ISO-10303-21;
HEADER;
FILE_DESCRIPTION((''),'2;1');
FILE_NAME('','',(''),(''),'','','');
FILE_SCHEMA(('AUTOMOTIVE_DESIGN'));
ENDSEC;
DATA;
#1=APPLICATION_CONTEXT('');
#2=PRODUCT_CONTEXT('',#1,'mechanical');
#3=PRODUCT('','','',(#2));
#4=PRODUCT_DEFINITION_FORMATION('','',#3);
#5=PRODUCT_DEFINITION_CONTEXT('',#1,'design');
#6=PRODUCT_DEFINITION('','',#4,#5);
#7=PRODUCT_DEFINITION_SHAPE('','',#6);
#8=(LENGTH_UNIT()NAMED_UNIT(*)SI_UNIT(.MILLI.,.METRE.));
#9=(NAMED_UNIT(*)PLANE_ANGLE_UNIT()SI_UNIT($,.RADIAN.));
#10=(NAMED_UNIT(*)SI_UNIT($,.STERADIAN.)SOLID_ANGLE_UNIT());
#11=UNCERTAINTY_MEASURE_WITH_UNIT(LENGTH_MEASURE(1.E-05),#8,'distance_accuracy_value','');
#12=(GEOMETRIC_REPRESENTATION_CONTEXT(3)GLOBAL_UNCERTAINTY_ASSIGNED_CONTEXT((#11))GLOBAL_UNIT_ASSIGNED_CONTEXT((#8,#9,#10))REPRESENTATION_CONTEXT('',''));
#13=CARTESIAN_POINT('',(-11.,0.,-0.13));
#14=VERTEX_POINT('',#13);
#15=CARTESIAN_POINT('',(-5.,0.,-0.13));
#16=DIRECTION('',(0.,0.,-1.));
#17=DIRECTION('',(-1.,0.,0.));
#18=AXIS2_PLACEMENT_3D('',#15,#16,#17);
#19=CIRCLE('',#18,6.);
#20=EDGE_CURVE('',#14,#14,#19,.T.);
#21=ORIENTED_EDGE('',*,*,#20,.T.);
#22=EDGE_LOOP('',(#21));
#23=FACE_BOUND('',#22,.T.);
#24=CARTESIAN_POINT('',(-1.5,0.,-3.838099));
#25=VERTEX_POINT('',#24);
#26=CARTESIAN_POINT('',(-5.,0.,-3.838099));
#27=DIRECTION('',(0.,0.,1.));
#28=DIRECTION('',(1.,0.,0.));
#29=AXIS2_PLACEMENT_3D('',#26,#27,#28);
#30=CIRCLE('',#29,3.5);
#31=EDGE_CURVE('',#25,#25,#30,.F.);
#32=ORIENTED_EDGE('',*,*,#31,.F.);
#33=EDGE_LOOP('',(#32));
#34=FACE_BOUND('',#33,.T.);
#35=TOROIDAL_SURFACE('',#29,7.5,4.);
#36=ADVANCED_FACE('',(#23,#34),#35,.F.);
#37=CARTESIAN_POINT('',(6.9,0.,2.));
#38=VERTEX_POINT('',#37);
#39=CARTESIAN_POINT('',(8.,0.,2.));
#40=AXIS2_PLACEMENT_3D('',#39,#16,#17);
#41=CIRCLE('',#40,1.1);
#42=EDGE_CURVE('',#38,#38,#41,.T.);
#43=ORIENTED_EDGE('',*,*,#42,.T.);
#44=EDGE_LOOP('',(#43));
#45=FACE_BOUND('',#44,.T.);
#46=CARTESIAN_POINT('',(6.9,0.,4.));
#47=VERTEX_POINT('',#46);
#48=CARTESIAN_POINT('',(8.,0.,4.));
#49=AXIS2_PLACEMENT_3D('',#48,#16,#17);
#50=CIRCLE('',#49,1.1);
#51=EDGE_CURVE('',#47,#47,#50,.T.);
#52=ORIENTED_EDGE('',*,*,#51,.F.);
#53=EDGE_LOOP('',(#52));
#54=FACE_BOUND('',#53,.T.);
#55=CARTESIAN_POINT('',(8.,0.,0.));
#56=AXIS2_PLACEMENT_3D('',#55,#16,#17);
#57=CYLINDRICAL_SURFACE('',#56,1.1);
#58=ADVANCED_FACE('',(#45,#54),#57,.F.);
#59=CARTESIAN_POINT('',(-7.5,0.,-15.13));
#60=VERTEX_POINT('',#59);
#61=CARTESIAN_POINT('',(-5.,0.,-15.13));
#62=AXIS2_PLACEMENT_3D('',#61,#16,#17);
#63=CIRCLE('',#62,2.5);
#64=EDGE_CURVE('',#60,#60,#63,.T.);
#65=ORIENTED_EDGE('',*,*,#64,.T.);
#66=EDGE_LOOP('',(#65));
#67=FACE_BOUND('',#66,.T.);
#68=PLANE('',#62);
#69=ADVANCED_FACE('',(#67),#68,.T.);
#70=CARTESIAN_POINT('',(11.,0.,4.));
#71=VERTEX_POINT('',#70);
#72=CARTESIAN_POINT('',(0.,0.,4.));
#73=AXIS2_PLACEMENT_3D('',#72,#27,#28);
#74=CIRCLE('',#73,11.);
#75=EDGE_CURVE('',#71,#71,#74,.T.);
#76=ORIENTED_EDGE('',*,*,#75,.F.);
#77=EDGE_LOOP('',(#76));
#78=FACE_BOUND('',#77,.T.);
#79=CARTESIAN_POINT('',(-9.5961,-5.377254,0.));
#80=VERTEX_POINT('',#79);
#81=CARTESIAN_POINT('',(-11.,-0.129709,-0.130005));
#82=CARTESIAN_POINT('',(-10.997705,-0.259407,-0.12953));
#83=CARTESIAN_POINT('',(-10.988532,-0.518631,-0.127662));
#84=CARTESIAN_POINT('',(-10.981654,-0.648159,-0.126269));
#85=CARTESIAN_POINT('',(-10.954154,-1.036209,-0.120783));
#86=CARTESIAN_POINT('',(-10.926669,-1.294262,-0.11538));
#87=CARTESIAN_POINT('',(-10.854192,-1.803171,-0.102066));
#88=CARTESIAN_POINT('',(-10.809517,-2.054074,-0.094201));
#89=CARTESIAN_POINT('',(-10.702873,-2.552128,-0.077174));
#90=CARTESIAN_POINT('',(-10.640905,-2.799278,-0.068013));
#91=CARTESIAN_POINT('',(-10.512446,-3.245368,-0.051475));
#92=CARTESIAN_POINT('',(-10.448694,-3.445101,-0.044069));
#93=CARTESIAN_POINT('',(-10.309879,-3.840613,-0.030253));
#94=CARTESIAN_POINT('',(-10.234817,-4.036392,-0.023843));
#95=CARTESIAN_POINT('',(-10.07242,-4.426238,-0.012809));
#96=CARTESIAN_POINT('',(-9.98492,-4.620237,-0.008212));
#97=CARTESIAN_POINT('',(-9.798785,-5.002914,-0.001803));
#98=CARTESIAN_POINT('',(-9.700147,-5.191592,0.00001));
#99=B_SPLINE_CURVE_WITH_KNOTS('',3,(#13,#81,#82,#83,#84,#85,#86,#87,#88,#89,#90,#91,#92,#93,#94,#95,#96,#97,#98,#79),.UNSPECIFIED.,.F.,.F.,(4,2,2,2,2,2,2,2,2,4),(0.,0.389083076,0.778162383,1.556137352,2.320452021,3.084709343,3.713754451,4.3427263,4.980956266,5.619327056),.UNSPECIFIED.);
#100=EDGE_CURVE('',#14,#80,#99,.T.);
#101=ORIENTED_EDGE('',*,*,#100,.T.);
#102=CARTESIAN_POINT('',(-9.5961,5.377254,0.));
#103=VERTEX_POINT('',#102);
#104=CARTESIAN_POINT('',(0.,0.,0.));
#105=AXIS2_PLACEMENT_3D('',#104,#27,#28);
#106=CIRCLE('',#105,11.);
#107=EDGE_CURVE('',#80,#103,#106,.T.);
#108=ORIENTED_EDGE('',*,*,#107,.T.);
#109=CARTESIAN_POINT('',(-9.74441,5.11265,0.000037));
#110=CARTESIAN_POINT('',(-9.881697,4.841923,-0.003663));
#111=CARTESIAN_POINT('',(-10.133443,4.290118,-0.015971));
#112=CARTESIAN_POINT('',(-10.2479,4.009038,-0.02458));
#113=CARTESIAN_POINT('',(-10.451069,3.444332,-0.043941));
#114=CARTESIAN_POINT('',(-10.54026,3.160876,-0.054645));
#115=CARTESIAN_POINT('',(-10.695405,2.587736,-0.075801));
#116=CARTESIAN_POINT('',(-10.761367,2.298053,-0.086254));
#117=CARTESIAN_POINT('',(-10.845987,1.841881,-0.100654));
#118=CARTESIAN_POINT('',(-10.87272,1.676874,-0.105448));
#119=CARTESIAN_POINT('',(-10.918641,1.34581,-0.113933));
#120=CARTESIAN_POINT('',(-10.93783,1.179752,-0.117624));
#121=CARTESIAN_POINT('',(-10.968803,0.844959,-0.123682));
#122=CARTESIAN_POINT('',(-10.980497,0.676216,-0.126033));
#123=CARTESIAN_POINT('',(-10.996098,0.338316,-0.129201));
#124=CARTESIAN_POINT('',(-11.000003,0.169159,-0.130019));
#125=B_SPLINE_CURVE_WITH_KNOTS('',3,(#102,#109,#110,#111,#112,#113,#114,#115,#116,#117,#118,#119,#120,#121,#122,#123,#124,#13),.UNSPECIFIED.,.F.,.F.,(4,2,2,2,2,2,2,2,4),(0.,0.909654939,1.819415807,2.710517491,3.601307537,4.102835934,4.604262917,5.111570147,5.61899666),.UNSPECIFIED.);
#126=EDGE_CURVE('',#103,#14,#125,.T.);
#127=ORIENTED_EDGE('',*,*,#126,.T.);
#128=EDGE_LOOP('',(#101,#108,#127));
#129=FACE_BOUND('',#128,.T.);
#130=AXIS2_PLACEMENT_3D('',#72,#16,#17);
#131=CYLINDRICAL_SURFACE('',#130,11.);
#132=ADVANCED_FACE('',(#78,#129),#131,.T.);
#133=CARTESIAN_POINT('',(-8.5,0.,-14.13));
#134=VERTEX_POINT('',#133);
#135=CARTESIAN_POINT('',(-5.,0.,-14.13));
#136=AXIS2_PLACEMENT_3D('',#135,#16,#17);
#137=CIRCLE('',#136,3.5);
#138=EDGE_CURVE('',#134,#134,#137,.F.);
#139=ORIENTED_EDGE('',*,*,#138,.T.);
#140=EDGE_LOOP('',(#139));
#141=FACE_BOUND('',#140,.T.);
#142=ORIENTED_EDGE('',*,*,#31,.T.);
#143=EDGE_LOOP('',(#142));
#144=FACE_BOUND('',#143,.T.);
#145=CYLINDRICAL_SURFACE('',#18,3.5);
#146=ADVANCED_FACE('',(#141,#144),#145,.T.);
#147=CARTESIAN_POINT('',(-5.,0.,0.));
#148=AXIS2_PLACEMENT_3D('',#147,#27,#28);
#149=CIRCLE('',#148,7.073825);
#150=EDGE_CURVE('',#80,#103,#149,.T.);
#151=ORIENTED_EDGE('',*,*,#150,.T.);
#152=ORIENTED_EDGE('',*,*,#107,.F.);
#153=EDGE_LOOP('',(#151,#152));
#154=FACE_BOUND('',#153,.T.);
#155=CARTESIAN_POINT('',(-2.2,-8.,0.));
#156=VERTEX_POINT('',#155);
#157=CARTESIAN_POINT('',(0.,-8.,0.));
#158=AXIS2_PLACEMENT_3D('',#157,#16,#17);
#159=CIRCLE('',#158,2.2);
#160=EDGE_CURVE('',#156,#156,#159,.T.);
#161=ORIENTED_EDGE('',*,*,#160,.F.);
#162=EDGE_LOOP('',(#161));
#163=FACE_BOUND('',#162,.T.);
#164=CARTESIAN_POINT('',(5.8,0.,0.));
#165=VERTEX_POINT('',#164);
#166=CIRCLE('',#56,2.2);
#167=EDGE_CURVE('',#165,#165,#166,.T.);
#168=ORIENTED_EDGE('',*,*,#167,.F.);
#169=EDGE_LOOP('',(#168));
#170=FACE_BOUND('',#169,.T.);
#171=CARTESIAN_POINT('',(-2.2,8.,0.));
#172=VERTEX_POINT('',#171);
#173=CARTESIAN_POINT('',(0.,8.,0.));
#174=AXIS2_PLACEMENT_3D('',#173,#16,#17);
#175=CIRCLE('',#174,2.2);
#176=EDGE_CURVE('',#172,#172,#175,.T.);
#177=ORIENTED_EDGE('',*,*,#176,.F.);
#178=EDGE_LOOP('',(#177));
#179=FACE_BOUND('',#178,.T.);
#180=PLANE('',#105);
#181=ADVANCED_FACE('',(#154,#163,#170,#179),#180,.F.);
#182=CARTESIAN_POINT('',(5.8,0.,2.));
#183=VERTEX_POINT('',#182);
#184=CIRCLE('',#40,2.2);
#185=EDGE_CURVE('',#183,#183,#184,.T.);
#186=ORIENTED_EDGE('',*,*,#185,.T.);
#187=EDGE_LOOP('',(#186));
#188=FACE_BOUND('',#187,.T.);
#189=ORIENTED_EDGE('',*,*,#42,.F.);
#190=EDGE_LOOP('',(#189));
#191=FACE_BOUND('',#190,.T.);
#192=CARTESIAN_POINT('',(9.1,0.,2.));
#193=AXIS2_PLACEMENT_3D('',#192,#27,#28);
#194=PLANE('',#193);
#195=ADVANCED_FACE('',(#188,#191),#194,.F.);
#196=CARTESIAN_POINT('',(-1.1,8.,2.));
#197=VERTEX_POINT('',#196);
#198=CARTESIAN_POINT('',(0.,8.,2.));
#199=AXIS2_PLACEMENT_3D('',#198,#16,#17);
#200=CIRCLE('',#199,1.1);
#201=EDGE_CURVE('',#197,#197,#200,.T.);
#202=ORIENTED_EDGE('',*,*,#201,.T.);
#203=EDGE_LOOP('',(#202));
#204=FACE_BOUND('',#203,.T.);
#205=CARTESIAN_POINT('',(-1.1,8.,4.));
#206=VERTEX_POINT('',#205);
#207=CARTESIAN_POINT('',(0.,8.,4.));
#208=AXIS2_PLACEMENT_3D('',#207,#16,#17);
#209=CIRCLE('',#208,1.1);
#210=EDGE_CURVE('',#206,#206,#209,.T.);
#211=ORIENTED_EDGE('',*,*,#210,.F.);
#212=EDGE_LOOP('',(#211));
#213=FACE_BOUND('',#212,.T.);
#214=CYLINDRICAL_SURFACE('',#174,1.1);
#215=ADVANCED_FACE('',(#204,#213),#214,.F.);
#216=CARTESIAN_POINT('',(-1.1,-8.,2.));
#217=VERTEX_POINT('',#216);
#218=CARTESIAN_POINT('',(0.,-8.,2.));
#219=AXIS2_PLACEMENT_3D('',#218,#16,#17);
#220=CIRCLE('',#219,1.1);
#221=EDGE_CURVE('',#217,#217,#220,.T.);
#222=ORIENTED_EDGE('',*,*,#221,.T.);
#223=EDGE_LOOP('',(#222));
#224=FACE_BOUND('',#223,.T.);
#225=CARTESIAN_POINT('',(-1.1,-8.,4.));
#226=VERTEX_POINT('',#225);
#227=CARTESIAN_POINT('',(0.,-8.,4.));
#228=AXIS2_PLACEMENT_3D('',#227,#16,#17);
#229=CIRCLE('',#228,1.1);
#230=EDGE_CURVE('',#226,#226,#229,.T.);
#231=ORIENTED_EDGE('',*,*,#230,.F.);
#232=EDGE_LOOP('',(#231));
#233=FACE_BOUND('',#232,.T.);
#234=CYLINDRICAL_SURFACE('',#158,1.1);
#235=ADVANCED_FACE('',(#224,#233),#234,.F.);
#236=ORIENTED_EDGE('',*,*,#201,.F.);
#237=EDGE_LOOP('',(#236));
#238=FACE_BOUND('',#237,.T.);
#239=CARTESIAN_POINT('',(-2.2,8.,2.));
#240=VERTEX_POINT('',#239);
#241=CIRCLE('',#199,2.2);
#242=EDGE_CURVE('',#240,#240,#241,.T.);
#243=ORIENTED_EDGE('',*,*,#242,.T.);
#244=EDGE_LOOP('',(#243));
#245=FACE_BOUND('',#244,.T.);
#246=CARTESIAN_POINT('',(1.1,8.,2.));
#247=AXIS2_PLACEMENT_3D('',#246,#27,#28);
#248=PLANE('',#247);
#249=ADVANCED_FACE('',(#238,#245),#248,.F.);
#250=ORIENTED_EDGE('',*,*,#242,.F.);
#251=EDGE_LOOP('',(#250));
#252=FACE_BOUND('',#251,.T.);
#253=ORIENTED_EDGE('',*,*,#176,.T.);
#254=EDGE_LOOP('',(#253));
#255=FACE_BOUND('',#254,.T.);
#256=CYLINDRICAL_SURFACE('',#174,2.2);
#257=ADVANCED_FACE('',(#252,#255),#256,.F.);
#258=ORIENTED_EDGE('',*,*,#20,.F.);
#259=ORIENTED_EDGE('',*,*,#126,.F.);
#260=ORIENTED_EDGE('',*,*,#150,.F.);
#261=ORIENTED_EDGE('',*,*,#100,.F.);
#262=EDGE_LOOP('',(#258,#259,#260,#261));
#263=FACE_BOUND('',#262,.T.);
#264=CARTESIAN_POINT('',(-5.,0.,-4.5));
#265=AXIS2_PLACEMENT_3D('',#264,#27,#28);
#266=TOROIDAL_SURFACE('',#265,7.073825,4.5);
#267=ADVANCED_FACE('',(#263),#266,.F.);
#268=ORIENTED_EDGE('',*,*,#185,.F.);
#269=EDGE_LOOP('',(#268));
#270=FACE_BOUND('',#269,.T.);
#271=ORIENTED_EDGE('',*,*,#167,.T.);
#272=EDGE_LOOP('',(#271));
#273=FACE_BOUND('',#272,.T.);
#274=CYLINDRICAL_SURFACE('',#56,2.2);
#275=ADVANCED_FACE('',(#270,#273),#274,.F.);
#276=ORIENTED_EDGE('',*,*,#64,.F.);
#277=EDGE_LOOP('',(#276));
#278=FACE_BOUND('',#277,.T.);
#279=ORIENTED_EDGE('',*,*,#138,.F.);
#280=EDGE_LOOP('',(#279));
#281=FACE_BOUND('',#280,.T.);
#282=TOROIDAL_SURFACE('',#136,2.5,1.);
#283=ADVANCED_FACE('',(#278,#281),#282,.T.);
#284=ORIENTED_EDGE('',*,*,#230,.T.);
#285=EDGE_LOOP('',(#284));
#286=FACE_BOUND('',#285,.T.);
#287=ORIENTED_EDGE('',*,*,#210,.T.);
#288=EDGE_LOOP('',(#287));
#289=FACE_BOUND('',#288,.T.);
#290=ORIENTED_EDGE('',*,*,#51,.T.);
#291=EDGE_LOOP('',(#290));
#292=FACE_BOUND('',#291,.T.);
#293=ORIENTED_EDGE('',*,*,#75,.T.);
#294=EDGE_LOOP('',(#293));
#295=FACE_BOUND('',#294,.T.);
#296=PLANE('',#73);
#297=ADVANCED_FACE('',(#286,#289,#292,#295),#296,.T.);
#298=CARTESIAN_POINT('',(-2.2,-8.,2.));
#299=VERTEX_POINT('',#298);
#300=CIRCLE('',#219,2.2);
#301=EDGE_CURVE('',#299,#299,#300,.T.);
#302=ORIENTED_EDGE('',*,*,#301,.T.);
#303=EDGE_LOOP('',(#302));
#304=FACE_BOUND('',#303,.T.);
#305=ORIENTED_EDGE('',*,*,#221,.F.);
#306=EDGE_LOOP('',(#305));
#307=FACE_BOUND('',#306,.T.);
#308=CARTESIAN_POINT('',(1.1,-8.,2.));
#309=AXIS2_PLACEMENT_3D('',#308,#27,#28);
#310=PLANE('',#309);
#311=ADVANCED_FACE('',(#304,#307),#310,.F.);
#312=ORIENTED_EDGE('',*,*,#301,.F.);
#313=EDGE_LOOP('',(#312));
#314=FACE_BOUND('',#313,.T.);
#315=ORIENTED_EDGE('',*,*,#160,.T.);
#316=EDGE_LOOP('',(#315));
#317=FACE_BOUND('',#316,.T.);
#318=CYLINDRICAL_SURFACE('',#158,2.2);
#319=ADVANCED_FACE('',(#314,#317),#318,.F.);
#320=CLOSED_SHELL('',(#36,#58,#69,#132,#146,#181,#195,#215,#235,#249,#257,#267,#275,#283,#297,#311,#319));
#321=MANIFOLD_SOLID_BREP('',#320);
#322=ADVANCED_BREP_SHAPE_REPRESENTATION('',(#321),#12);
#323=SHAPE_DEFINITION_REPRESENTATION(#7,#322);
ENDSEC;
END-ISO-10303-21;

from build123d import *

# Parameters (mm, degrees)
SKETCH1_R                      = 11
SKETCH1_R_2                    = 1.05
BOSS_EXTRUDE1_DEPTH            = 4
SKETCH9_R                      = 6
BOSS_EXTRUDE2_DEPTH            = 15.13
SKETCH10_OUTSIDE_W             = 31.304
SKETCH10_OUTSIDE_H             = 31.304
SKETCH10_OUTSIDE_R             = 3.5
CUT_EXTRUDE2_DEPTH             = 15
FILLET1_R                      = 4.5
FILLET2_R                      = 1
FILLET4_R                      = 4
CBORE_FOR_M2_SHCS1_D           = 2.2
CBORE_FOR_M2_SHCS1_CBORE_D     = 4.4
CBORE_FOR_M2_SHCS1_CBORE_DEPTH = 2


with BuildPart() as part:
    # Sketch1 → Boss-Extrude1 (new body)
    with BuildSketch(Plane.XY):
        Circle(SKETCH1_R)
        with Locations((0, 8)):
            Circle(SKETCH1_R_2, mode=Mode.SUBTRACT)
        with Locations((8, 0)):
            Circle(SKETCH1_R_2, mode=Mode.SUBTRACT)
        with Locations((0, -8)):
            Circle(SKETCH1_R_2, mode=Mode.SUBTRACT)
    extrude(amount=BOSS_EXTRUDE1_DEPTH)

    # Sketch9 → Boss-Extrude2 (add)
    with BuildSketch(Plane(origin=(0, 0, 0), x_dir=(-1, 0, 0), z_dir=(0, 0, -1))):
        with Locations((5, 0)):
            Circle(SKETCH9_R)
    extrude(amount=BOSS_EXTRUDE2_DEPTH)

    # Sketch10 outside → Cut-Extrude2 (cut)
    with BuildSketch(Plane(origin=(0, 0, -15.13), x_dir=(-1, 0, 0), z_dir=(0, 0, -1))):
        Rectangle(SKETCH10_OUTSIDE_W, SKETCH10_OUTSIDE_H)
        with Locations((5, 0)):
            Circle(SKETCH10_OUTSIDE_R, mode=Mode.SUBTRACT)
    extrude(amount=-CUT_EXTRUDE2_DEPTH, mode=Mode.SUBTRACT)

    # Fillet1
    # the kernel refuses this fillet: 4.5 mm, written as the material it adds along each edge
    with BuildSketch(Plane(origin=(-5, 0, 0), x_dir=(-1, 0, 0), z_dir=(0, -1, 0))) as fillet1_piece_1_section:
        with BuildLine():
            CenterArc((7.073824939, 4.5), FILLET1_R, 256.19443595, 13.80556405)
            Line((6, 0.13), (6, 0))
            Line((6, 0), (7.073824939, 0))
        make_face()
    fillet1_piece_1 = revolve(axis=Axis((-5, 0, 0), (0, 0, -1)), mode=Mode.PRIVATE)
    fillet1_piece_1 = fillet1_piece_1 & Plane(origin=(0, 0, -0.023683453), x_dir=(1, 0, 0), z_dir=(0, 0, -1)) * Cylinder(11, 29, mode=Mode.PRIVATE)
    add(fillet1_piece_1)

    # Fillet2
    fillet2_edges = [part.edges().sort_by_distance(p)[0] for p in [
        (-1.5, 0, -15.13),
    ]]
    fillet(fillet2_edges, radius=FILLET2_R)

    # Fillet4
    # the kernel refuses this fillet: 4 mm, written as the material it adds along each edge
    with BuildSketch(Plane(origin=(-5, 0, -0.13), x_dir=(-1, 0, 0), z_dir=(0, -1, 0))) as fillet4_piece_1:
        with BuildLine():
            CenterArc((7.5, 3.708099244), FILLET4_R, 180, 67.975687163)
            Line((6, 0), (5.97, -0.074161985))
            ThreePointArc((5.97, -0.074161985), (4.75, -0.08), (3.5, -0.08))
            Line((3.5, -0.08), (3.42, 0))
            Line((3.42, 0), (3.42, 3.708099244))
            Line((3.42, 3.708099244), (3.5, 3.708099244))
        make_face()
    revolve(axis=Axis((-5, 0, -0.13), (0, 0, -1)))

    # CBORE for M2 SHCS1 (through all)
    with Locations(Plane(origin=(0, 0, 0), x_dir=(-1, 0, 0), z_dir=(0, 0, -1))):
        with Locations((0, 8), (-8, 0), (0, -8)):
            CounterBoreHole(CBORE_FOR_M2_SHCS1_D / 2, CBORE_FOR_M2_SHCS1_CBORE_D / 2, CBORE_FOR_M2_SHCS1_CBORE_DEPTH)


solid = part.part
